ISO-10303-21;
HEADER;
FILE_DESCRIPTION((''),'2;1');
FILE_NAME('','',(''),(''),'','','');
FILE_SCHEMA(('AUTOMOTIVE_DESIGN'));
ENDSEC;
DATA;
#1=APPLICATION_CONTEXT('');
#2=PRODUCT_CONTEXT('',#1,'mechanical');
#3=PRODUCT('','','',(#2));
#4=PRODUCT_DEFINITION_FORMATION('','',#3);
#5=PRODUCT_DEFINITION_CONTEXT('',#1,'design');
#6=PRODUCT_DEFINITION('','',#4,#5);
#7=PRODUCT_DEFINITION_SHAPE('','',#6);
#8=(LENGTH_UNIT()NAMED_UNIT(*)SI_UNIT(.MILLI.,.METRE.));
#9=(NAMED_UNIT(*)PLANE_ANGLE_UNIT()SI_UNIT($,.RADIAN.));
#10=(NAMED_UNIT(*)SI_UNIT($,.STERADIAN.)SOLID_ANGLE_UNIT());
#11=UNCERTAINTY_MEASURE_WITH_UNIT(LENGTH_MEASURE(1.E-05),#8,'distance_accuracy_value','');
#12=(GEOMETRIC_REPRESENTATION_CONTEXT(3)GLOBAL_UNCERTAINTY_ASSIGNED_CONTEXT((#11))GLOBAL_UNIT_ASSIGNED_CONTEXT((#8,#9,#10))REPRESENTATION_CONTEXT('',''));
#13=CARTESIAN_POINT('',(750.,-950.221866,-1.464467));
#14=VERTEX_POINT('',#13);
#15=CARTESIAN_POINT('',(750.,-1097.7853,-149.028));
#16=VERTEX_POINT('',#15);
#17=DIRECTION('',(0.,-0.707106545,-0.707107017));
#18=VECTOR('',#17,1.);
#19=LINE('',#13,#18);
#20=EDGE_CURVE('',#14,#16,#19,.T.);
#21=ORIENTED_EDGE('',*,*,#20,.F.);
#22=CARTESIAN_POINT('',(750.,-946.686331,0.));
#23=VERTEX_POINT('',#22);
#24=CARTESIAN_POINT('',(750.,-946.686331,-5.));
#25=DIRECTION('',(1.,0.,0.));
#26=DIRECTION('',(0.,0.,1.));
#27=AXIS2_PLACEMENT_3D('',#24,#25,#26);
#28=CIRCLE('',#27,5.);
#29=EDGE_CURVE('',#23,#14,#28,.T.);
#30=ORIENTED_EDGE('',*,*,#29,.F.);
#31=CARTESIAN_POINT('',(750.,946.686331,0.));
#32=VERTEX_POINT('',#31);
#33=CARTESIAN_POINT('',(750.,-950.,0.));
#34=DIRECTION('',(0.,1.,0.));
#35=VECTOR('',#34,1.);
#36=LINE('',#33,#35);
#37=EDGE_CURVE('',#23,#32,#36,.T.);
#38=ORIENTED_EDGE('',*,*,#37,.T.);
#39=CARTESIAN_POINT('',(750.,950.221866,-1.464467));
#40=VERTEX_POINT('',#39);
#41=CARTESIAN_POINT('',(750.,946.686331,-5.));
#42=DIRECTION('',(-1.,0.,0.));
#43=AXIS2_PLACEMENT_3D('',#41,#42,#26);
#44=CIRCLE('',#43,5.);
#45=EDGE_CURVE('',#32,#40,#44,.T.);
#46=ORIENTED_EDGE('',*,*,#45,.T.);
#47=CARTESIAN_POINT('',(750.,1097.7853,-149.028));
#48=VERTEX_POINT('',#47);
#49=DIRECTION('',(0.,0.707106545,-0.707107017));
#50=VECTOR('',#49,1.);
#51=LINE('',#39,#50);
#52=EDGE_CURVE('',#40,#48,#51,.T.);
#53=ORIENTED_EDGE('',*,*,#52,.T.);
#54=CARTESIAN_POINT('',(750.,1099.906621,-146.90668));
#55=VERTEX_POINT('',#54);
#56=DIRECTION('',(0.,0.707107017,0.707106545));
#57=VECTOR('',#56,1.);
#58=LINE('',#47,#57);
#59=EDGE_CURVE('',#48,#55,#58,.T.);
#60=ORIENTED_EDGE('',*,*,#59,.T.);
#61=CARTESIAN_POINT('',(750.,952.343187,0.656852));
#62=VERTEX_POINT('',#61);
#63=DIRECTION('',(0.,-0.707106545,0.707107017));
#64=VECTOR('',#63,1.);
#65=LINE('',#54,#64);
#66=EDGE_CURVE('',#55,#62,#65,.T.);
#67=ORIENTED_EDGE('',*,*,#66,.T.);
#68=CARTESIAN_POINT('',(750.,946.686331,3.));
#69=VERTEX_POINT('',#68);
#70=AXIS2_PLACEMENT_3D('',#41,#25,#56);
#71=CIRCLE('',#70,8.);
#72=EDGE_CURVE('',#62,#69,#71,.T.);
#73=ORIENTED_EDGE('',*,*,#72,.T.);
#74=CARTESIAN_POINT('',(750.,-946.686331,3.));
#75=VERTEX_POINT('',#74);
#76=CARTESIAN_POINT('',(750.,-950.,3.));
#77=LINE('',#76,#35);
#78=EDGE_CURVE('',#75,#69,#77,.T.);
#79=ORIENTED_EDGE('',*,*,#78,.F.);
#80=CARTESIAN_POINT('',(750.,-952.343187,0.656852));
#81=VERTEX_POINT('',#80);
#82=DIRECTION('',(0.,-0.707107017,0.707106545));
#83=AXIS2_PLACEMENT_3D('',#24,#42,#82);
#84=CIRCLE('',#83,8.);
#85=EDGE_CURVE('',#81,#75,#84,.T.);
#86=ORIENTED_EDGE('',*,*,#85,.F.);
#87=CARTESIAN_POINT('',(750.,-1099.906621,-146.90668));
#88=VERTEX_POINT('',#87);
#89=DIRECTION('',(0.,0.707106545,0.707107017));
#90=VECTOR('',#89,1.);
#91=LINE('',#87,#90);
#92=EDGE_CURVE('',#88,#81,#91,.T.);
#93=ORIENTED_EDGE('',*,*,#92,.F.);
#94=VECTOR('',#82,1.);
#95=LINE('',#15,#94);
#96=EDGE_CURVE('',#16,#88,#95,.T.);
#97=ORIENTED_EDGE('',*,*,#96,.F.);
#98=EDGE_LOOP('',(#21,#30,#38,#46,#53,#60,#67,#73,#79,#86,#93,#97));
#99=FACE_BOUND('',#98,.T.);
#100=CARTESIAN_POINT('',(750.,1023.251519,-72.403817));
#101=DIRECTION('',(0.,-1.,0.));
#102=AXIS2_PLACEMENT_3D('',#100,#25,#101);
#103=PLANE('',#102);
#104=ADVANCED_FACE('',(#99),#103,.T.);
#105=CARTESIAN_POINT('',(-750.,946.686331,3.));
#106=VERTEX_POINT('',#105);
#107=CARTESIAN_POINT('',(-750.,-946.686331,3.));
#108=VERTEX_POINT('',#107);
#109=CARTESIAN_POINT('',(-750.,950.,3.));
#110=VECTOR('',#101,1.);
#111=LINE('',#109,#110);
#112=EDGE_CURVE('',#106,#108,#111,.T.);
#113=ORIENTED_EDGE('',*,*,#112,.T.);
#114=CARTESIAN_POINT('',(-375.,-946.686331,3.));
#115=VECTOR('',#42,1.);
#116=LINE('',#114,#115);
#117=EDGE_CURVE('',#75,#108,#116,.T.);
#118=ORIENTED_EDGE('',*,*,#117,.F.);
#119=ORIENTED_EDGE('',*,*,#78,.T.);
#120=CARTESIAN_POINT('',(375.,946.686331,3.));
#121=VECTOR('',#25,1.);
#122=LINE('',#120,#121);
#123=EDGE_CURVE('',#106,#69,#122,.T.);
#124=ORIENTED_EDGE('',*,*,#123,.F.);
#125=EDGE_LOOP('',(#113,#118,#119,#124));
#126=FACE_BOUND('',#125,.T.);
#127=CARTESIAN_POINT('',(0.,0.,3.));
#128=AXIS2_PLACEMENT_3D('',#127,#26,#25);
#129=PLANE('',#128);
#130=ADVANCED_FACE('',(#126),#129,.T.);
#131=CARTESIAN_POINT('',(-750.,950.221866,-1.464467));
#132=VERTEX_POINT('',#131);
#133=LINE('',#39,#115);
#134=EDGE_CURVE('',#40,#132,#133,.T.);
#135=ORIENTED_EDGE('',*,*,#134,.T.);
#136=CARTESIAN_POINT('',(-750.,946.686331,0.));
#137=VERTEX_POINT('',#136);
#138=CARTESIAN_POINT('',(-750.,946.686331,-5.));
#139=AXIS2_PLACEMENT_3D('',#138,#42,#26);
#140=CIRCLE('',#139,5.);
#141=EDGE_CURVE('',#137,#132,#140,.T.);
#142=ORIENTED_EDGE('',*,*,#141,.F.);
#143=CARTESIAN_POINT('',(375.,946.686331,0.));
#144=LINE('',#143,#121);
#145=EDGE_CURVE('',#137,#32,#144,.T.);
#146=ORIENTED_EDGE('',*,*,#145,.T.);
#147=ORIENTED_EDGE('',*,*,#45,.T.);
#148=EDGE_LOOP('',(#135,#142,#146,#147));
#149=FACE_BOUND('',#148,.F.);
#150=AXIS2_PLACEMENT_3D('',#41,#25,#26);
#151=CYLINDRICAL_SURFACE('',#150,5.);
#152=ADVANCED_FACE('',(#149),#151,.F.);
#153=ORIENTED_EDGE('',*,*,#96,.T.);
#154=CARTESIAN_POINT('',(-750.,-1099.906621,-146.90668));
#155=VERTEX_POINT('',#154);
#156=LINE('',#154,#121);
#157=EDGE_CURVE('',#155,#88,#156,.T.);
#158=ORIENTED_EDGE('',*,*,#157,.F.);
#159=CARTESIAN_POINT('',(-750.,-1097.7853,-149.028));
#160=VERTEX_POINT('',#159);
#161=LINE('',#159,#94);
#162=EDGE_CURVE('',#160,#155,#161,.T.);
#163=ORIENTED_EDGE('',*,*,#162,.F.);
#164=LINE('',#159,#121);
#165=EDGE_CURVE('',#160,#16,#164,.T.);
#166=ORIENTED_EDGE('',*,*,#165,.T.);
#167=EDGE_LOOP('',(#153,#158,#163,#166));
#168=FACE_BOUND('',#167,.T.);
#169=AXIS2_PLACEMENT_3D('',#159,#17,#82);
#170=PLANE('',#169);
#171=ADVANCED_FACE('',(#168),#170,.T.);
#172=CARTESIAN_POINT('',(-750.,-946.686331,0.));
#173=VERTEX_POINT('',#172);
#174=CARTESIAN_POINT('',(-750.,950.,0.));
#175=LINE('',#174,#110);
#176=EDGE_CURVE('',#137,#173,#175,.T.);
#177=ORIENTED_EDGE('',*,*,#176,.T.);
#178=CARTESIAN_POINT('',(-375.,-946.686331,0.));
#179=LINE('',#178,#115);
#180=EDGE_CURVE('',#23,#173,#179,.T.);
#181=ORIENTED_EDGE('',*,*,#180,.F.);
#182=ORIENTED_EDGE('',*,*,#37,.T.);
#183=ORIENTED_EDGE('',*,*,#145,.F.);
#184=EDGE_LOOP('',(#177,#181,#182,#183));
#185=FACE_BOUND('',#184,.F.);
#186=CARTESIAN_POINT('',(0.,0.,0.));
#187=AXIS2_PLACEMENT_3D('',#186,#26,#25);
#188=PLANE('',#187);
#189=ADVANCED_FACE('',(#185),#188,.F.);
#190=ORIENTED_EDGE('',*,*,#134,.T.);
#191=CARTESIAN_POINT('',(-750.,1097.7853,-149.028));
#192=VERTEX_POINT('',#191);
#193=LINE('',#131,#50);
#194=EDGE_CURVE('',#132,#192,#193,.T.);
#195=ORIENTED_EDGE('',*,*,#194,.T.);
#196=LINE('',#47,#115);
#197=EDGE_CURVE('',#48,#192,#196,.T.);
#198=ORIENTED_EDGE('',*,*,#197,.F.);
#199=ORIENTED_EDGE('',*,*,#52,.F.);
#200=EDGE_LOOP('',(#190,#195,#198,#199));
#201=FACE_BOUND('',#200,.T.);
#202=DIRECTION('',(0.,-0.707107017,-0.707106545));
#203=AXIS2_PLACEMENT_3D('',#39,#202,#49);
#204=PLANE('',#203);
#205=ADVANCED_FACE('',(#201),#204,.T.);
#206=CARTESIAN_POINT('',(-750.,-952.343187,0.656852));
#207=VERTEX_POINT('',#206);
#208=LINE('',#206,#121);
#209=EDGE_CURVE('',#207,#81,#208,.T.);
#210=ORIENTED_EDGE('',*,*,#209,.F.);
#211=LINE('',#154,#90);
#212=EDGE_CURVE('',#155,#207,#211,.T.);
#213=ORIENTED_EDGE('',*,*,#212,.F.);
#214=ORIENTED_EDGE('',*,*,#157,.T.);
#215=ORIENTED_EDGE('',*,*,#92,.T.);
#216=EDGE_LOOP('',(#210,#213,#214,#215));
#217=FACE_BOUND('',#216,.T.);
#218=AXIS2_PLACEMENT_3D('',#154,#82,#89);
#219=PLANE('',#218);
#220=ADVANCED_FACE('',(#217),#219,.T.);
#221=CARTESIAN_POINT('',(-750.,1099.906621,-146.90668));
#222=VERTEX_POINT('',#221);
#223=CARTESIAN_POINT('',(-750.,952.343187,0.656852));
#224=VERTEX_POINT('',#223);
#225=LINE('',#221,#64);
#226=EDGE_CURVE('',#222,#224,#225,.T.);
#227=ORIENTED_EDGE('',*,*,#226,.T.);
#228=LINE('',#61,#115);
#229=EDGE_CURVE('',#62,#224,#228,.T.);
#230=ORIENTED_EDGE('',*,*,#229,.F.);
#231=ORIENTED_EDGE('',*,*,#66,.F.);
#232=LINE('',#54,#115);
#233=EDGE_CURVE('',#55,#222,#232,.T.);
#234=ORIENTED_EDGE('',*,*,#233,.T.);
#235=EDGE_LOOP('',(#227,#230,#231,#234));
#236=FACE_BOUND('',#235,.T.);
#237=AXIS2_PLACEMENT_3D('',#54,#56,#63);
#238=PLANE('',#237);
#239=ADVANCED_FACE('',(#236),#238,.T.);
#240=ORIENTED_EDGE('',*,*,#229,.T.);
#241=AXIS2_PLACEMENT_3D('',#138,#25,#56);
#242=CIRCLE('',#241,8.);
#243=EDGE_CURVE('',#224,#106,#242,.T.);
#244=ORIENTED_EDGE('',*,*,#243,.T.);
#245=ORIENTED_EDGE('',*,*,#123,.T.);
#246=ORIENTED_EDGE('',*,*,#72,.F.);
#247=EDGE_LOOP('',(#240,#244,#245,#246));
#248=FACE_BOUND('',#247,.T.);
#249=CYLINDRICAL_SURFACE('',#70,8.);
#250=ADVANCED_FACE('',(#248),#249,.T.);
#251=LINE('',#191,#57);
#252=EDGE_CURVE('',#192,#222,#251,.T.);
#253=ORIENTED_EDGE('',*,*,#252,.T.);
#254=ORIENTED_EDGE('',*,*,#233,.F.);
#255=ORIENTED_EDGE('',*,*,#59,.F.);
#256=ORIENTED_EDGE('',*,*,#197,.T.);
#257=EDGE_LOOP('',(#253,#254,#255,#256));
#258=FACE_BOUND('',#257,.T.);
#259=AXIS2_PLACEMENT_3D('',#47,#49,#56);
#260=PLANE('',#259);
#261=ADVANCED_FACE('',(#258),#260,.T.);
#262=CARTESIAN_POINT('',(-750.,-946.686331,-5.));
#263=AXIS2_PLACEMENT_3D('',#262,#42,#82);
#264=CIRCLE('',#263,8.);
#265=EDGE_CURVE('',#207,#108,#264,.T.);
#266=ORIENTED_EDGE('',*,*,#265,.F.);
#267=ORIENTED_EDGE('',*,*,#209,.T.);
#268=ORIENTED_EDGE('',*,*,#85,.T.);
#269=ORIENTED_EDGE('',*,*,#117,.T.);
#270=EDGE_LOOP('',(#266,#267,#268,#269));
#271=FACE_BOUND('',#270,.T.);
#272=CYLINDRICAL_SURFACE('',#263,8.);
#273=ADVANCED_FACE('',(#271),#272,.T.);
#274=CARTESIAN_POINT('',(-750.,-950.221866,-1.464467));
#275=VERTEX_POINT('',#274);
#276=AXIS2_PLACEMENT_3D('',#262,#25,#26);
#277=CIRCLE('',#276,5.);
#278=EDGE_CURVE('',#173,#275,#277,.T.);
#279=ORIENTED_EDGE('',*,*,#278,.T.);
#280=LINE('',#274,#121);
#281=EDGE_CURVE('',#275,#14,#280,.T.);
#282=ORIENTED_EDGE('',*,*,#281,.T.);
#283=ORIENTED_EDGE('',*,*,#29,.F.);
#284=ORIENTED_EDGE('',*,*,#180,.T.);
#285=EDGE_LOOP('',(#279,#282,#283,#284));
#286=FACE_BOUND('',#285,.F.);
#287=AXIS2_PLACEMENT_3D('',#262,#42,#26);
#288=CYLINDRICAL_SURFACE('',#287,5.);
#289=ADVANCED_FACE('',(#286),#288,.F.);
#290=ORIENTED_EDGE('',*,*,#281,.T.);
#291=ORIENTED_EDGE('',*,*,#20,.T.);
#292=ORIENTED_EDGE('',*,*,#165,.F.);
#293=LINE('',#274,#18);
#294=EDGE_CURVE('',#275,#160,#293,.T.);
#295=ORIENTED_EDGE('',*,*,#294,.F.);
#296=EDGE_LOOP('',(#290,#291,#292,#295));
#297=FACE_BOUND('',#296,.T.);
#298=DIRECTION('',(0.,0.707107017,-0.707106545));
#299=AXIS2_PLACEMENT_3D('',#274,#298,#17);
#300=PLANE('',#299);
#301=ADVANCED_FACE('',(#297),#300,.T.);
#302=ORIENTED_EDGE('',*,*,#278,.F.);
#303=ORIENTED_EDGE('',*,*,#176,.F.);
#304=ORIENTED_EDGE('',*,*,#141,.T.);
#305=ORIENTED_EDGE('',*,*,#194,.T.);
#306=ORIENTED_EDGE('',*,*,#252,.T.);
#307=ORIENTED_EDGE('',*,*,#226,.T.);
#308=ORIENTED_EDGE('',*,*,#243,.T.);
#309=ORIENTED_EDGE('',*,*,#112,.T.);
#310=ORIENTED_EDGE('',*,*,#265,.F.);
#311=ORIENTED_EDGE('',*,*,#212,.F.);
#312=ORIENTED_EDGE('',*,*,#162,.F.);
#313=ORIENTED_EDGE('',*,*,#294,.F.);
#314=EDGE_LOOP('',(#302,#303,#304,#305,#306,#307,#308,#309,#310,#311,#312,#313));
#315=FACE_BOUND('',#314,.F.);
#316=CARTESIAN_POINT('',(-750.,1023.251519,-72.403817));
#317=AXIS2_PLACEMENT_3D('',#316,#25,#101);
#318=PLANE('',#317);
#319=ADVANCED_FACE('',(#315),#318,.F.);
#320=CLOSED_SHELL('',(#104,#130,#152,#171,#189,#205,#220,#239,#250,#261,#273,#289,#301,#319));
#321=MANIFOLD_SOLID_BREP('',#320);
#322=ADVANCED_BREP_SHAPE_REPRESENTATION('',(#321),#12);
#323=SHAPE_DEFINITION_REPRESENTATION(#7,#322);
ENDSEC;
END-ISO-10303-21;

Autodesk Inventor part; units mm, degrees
ref_plane "YZ Plane" through (0, 0, 0) normal (1, 0, 0) x (0, 1, 0)
ref_plane "XZ Plane" through (0, 0, 0) normal (0, 1, 0) x (-1, 0, 0)
ref_plane "XY Plane" through (0, 0, 0) normal (0, 0, 1) x (1, 0, 0)
sketch "Sketch1" plane through (0, 0, 0) normal (0, 0, 1) x (1, 0, 0)
  line L0 (-750, -950) -> (750, -950)
  line L1 (750, -950) -> (750, 950)
  line L2 (750, 950) -> (-750, 950)
  line L3 (-750, 950) -> (-750, -950)
  line L4 (-750, -950) -> (750, 950) construction
  line L5 (750, -950) -> (-750, 950) construction
  point P0 (0, 0)
  dimension "d0" = 1500
  dimension "d1" = 1900
extrude "Plate1" add sketch "Sketch1" along normal blind 3
sketch "Sketch2" plane through (750, 947.8787, 0.8787) normal (0, 0.7071068, 0.7071068) x (-1, 0, 0)
  line L0 (1500, 0) -> (0, 0)
  line L1 (0, 0) -> (0, -212)
  line L2 (0, -212) -> (1500, -212)
  line L3 (1500, -212) -> (1500, 0)
edge flange "Flange1" height 212 angle 45 thickness 3 bend radius 5 thickness toward (0, 0.7071068, 0.7071068) relief round relief width 3 relief depth 1.5 corner gap 5 corner form 0 edges at (0, 950, 0) (0, -950, 0) wall of the first edge with corners at (-750, 947.8787, 0.8787) (750, 947.8787, 0.8787) (750, 1097.7853, -149.028) (-750, 1097.7853, -149.028)
bend "Bend1"
corner "Corner1"
equation "\"d2\" = Thickness"
equation "\"d3\" = BendReliefWidth"
equation "\"d4\" = BendReliefDepth"
equation "\"d5\" = MinimumRemnant"
equation "\"d6\" = TransitionRadius"
equation "\"d9\" = BendRadius"
equation "\"d10\" = CornerReliefSize"
equation "\"d11\" = GapSize"
equation "\"d12\" = JacobiRadiusSize"
equation "\"BendReliefWidth\" = Thickness"
equation "\"BendReliefDepth\" = 0.5 * Thickness"
equation "\"CornerReliefSize\" = 4 * Thickness"
equation "\"MinimumRemnant\" = 2 * Thickness"
equation "\"TransitionRadius\" = BendRadius"
equation "\"JacobiRadiusSize\" = BendRadius"
equation "\"GapSize\" = Thickness"
equation "\"Thickness\" = 3"
equation "\"BendRadius\" = 5"
properties part number "BSH 010 floor 1" material "09g2s"
